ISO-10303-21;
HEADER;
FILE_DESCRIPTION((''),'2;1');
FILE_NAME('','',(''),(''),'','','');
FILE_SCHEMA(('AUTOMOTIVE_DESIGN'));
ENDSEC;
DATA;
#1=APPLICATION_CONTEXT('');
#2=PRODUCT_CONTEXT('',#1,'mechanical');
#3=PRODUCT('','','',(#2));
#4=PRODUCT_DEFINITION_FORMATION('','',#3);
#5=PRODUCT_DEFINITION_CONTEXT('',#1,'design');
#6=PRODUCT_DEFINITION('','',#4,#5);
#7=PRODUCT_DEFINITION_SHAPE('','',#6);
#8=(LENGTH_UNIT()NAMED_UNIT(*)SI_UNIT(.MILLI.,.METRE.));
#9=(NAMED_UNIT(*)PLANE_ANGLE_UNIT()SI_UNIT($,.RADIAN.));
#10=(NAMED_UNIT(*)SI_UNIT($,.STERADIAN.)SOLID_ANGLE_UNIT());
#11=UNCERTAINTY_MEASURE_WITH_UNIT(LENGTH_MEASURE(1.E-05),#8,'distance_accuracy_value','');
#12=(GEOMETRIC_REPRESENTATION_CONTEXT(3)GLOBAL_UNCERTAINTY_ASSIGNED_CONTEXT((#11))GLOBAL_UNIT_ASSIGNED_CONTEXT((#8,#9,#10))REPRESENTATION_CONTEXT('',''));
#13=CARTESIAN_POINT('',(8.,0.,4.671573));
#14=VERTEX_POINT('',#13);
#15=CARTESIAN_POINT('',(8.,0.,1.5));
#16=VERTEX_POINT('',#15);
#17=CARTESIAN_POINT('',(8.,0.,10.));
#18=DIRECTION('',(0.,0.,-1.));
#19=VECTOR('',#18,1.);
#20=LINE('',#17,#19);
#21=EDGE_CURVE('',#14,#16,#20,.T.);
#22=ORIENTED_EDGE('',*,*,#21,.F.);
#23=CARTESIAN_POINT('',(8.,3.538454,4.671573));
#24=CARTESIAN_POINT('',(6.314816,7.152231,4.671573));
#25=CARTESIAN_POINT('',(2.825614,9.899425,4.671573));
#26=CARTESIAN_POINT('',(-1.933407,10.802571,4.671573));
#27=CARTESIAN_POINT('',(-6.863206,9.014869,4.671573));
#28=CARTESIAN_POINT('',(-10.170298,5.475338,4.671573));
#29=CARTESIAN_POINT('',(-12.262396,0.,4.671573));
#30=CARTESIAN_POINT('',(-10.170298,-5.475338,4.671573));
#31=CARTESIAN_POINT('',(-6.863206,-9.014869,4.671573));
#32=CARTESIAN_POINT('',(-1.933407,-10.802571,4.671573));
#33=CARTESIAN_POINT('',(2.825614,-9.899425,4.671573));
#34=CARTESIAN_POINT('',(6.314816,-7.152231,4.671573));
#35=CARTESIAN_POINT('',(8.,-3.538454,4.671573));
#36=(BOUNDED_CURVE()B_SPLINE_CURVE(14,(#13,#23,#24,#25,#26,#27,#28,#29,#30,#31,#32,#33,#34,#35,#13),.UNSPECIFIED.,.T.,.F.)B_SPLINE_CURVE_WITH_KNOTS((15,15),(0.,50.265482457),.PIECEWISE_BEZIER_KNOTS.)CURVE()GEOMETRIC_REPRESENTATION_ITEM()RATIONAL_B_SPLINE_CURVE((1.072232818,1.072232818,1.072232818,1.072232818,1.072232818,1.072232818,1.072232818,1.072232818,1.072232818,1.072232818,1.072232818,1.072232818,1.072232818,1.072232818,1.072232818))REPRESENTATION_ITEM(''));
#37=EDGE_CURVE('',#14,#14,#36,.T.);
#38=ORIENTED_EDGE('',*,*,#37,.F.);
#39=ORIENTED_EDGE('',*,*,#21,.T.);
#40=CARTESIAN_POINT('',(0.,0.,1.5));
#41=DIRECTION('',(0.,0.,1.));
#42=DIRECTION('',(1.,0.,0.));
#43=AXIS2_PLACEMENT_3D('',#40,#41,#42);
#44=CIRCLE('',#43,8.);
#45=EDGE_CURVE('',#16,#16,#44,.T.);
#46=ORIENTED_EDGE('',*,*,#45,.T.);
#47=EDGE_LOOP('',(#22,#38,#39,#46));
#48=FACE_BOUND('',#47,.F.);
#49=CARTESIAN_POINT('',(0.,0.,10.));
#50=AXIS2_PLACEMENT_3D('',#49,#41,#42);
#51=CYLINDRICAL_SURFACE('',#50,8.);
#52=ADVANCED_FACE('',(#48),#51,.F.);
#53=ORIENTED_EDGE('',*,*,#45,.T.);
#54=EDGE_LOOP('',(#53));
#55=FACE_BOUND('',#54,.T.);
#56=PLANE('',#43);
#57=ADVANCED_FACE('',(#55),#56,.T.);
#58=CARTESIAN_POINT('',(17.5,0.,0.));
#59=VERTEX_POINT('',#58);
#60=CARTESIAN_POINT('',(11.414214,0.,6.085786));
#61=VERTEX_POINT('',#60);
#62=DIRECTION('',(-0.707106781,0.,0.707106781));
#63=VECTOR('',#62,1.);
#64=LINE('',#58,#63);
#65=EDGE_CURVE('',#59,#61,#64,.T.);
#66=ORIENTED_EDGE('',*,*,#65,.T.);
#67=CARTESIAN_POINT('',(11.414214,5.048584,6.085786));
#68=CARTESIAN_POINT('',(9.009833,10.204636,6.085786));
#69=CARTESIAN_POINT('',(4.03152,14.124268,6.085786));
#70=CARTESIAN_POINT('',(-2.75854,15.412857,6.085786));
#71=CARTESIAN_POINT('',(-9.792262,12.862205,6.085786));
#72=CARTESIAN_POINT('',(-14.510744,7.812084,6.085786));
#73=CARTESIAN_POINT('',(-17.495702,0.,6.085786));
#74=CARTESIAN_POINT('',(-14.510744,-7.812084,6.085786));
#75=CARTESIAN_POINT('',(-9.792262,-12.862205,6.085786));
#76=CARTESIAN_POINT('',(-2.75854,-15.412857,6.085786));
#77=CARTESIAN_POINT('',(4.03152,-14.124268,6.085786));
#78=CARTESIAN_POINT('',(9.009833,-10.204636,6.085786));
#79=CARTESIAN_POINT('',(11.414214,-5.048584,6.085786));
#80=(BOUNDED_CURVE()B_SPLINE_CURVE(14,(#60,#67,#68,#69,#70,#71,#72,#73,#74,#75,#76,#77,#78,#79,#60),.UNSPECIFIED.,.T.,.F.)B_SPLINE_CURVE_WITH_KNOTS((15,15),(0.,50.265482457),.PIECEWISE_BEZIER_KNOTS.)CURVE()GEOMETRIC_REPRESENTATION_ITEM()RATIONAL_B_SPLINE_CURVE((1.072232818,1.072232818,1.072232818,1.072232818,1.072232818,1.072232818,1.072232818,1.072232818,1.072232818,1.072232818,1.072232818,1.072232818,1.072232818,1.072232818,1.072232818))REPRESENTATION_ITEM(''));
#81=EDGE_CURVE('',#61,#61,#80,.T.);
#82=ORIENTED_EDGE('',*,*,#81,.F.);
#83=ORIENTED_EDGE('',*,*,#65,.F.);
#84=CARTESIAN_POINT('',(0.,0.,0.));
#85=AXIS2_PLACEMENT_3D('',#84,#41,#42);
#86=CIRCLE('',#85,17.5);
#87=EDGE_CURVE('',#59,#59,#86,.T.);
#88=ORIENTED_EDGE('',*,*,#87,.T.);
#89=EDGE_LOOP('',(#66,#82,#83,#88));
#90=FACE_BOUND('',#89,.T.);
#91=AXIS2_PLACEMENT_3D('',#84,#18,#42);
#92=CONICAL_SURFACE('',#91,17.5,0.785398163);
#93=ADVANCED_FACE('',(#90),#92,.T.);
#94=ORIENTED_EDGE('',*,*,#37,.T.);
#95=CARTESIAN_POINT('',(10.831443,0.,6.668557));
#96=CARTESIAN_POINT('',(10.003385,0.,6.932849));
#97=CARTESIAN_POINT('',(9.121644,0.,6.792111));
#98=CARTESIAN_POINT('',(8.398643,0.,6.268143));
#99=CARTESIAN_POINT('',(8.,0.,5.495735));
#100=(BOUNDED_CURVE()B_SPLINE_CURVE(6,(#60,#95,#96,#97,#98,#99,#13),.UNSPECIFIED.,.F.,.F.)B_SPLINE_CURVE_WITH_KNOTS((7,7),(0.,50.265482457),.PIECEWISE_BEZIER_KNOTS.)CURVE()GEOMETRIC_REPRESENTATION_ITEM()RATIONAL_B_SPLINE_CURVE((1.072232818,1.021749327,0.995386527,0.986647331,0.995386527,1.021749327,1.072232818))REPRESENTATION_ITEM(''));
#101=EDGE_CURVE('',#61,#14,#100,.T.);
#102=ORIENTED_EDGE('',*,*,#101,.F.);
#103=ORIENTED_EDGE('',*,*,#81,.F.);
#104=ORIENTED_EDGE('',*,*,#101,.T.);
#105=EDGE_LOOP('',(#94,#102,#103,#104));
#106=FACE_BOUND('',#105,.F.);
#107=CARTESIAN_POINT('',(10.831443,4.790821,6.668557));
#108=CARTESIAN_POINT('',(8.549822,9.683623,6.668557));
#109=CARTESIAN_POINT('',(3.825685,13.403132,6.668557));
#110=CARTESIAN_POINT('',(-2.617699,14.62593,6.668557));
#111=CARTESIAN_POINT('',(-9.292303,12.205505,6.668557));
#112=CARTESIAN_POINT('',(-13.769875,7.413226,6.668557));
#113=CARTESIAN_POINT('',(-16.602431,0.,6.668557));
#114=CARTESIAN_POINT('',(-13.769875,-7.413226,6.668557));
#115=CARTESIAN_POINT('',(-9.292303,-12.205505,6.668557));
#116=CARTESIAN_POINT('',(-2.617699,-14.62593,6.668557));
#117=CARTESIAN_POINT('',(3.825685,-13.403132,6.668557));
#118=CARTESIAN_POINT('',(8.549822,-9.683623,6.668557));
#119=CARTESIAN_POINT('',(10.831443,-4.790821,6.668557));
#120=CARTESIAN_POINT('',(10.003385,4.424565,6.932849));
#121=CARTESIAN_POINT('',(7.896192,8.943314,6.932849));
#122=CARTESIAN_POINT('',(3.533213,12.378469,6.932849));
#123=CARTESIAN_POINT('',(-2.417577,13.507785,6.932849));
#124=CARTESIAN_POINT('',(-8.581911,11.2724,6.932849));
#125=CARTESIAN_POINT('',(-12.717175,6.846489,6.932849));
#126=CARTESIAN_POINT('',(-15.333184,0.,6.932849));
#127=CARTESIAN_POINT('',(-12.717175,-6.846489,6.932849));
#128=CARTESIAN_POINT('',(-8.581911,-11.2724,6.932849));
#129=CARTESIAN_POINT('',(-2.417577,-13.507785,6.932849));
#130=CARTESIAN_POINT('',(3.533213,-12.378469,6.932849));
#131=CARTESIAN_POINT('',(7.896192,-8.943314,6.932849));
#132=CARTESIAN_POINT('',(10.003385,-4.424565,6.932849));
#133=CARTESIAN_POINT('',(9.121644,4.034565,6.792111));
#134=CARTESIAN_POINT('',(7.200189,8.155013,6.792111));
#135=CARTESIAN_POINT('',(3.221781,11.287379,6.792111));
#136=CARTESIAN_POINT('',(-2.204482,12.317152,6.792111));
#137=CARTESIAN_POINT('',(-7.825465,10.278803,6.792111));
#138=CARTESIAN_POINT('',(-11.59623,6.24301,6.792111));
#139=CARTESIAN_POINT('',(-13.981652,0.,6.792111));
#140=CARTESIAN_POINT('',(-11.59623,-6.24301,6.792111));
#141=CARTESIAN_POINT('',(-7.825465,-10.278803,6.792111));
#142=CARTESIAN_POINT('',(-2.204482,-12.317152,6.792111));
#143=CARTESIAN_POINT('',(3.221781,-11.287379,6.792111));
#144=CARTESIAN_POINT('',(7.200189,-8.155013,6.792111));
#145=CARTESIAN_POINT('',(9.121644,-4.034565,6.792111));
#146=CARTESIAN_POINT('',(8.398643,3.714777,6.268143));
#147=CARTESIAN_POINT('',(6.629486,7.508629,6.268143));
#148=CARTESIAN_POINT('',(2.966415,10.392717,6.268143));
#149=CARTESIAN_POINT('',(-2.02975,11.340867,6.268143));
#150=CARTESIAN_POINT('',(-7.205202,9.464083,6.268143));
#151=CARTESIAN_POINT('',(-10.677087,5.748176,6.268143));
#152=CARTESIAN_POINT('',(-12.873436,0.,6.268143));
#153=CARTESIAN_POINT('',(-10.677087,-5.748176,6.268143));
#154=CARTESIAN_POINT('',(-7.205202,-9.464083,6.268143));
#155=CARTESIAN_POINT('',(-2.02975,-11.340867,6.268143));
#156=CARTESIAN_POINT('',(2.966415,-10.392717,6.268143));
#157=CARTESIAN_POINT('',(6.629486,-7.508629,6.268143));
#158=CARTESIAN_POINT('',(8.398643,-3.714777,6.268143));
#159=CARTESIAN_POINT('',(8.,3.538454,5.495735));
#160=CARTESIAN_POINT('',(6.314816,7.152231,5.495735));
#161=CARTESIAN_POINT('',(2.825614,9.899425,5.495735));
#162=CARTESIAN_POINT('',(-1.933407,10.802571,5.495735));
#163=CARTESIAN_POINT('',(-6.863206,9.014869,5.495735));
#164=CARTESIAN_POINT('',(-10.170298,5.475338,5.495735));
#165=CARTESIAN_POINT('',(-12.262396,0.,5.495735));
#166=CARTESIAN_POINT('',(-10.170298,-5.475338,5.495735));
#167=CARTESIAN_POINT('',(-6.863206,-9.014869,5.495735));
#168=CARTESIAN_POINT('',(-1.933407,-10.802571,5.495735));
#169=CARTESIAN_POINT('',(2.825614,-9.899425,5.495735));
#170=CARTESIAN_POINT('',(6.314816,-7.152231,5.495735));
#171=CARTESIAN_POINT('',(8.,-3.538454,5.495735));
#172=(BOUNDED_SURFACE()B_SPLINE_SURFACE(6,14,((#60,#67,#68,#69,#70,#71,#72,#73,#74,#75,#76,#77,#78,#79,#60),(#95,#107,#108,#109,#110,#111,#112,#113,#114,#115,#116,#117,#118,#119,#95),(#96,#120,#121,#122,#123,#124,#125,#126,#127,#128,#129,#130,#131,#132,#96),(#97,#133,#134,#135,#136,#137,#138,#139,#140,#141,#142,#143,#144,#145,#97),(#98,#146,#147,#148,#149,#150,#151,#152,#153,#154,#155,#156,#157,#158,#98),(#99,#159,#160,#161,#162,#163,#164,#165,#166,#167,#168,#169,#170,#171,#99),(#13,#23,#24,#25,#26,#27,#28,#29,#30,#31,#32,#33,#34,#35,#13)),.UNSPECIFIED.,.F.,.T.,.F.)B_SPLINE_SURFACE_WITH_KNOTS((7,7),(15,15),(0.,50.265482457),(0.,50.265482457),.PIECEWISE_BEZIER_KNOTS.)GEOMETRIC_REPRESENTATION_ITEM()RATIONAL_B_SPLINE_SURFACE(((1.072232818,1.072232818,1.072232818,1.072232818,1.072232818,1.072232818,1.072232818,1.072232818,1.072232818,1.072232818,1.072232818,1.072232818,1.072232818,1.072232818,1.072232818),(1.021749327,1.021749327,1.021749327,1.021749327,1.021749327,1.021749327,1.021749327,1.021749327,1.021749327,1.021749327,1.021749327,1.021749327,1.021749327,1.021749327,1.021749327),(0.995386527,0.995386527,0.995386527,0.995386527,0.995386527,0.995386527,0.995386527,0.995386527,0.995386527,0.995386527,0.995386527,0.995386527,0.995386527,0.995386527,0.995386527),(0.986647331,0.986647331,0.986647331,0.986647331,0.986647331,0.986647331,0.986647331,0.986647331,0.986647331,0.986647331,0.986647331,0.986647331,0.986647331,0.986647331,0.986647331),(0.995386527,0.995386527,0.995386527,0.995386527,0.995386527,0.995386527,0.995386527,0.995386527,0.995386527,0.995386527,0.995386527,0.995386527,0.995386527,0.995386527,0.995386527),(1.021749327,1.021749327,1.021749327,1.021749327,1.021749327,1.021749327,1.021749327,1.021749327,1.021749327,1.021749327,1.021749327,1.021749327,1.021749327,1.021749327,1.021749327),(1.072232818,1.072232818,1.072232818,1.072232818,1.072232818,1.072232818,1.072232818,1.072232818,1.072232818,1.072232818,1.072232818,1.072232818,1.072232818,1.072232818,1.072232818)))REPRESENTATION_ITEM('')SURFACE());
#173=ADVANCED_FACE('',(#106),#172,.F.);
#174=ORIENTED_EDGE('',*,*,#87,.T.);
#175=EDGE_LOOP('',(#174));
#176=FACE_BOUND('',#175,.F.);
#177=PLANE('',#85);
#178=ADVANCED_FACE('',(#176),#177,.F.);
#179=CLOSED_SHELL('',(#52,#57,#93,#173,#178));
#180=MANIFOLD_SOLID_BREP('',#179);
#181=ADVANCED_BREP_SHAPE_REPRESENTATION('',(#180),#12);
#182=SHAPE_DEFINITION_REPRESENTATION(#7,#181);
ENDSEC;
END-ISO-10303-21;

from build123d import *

# Parameters (mm, degrees)
F0_R     = 17.5
F1_DEPTH = 10
F2_R     = 8
F3_DEPTH = 8.5
F5_R     = 2


# Not quite as in the source:
# - a fillet or chamfer that OpenCascade refuses, or shapes differently, is made with other operations: its cross-section is extruded or revolved along the edge and cut away or added


with BuildPart() as f1:
    # F0 (on Top) → F1 (new body)
    with BuildSketch(Plane.XY):
        Circle(F0_R)
    extrude(amount=F1_DEPTH)

    # F2 (on face) → F3 (cut)
    with BuildSketch(Plane.XY.offset(10)):
        Circle(F2_R)
    extrude(amount=-F3_DEPTH, mode=Mode.SUBTRACT)

    # F4: chamfer of 10 on 1 edges, made by hand

    # F4_s1 → F4_t2 (revolve, cut)
    with BuildSketch(Plane.XZ):
        Polygon((17.5, 0), (7.5, 10), (17.5, 10), align=None)
    revolve(axis=Axis((0, 0, 10), (0, 0, 1)), mode=Mode.SUBTRACT)

    # F5
    f5_edges = [f1.edges().sort_by_distance(p)[0] for p in [
        (-8, 0, 9.5),
    ]]
    fillet(f5_edges, radius=F5_R)


solid = f1.part
